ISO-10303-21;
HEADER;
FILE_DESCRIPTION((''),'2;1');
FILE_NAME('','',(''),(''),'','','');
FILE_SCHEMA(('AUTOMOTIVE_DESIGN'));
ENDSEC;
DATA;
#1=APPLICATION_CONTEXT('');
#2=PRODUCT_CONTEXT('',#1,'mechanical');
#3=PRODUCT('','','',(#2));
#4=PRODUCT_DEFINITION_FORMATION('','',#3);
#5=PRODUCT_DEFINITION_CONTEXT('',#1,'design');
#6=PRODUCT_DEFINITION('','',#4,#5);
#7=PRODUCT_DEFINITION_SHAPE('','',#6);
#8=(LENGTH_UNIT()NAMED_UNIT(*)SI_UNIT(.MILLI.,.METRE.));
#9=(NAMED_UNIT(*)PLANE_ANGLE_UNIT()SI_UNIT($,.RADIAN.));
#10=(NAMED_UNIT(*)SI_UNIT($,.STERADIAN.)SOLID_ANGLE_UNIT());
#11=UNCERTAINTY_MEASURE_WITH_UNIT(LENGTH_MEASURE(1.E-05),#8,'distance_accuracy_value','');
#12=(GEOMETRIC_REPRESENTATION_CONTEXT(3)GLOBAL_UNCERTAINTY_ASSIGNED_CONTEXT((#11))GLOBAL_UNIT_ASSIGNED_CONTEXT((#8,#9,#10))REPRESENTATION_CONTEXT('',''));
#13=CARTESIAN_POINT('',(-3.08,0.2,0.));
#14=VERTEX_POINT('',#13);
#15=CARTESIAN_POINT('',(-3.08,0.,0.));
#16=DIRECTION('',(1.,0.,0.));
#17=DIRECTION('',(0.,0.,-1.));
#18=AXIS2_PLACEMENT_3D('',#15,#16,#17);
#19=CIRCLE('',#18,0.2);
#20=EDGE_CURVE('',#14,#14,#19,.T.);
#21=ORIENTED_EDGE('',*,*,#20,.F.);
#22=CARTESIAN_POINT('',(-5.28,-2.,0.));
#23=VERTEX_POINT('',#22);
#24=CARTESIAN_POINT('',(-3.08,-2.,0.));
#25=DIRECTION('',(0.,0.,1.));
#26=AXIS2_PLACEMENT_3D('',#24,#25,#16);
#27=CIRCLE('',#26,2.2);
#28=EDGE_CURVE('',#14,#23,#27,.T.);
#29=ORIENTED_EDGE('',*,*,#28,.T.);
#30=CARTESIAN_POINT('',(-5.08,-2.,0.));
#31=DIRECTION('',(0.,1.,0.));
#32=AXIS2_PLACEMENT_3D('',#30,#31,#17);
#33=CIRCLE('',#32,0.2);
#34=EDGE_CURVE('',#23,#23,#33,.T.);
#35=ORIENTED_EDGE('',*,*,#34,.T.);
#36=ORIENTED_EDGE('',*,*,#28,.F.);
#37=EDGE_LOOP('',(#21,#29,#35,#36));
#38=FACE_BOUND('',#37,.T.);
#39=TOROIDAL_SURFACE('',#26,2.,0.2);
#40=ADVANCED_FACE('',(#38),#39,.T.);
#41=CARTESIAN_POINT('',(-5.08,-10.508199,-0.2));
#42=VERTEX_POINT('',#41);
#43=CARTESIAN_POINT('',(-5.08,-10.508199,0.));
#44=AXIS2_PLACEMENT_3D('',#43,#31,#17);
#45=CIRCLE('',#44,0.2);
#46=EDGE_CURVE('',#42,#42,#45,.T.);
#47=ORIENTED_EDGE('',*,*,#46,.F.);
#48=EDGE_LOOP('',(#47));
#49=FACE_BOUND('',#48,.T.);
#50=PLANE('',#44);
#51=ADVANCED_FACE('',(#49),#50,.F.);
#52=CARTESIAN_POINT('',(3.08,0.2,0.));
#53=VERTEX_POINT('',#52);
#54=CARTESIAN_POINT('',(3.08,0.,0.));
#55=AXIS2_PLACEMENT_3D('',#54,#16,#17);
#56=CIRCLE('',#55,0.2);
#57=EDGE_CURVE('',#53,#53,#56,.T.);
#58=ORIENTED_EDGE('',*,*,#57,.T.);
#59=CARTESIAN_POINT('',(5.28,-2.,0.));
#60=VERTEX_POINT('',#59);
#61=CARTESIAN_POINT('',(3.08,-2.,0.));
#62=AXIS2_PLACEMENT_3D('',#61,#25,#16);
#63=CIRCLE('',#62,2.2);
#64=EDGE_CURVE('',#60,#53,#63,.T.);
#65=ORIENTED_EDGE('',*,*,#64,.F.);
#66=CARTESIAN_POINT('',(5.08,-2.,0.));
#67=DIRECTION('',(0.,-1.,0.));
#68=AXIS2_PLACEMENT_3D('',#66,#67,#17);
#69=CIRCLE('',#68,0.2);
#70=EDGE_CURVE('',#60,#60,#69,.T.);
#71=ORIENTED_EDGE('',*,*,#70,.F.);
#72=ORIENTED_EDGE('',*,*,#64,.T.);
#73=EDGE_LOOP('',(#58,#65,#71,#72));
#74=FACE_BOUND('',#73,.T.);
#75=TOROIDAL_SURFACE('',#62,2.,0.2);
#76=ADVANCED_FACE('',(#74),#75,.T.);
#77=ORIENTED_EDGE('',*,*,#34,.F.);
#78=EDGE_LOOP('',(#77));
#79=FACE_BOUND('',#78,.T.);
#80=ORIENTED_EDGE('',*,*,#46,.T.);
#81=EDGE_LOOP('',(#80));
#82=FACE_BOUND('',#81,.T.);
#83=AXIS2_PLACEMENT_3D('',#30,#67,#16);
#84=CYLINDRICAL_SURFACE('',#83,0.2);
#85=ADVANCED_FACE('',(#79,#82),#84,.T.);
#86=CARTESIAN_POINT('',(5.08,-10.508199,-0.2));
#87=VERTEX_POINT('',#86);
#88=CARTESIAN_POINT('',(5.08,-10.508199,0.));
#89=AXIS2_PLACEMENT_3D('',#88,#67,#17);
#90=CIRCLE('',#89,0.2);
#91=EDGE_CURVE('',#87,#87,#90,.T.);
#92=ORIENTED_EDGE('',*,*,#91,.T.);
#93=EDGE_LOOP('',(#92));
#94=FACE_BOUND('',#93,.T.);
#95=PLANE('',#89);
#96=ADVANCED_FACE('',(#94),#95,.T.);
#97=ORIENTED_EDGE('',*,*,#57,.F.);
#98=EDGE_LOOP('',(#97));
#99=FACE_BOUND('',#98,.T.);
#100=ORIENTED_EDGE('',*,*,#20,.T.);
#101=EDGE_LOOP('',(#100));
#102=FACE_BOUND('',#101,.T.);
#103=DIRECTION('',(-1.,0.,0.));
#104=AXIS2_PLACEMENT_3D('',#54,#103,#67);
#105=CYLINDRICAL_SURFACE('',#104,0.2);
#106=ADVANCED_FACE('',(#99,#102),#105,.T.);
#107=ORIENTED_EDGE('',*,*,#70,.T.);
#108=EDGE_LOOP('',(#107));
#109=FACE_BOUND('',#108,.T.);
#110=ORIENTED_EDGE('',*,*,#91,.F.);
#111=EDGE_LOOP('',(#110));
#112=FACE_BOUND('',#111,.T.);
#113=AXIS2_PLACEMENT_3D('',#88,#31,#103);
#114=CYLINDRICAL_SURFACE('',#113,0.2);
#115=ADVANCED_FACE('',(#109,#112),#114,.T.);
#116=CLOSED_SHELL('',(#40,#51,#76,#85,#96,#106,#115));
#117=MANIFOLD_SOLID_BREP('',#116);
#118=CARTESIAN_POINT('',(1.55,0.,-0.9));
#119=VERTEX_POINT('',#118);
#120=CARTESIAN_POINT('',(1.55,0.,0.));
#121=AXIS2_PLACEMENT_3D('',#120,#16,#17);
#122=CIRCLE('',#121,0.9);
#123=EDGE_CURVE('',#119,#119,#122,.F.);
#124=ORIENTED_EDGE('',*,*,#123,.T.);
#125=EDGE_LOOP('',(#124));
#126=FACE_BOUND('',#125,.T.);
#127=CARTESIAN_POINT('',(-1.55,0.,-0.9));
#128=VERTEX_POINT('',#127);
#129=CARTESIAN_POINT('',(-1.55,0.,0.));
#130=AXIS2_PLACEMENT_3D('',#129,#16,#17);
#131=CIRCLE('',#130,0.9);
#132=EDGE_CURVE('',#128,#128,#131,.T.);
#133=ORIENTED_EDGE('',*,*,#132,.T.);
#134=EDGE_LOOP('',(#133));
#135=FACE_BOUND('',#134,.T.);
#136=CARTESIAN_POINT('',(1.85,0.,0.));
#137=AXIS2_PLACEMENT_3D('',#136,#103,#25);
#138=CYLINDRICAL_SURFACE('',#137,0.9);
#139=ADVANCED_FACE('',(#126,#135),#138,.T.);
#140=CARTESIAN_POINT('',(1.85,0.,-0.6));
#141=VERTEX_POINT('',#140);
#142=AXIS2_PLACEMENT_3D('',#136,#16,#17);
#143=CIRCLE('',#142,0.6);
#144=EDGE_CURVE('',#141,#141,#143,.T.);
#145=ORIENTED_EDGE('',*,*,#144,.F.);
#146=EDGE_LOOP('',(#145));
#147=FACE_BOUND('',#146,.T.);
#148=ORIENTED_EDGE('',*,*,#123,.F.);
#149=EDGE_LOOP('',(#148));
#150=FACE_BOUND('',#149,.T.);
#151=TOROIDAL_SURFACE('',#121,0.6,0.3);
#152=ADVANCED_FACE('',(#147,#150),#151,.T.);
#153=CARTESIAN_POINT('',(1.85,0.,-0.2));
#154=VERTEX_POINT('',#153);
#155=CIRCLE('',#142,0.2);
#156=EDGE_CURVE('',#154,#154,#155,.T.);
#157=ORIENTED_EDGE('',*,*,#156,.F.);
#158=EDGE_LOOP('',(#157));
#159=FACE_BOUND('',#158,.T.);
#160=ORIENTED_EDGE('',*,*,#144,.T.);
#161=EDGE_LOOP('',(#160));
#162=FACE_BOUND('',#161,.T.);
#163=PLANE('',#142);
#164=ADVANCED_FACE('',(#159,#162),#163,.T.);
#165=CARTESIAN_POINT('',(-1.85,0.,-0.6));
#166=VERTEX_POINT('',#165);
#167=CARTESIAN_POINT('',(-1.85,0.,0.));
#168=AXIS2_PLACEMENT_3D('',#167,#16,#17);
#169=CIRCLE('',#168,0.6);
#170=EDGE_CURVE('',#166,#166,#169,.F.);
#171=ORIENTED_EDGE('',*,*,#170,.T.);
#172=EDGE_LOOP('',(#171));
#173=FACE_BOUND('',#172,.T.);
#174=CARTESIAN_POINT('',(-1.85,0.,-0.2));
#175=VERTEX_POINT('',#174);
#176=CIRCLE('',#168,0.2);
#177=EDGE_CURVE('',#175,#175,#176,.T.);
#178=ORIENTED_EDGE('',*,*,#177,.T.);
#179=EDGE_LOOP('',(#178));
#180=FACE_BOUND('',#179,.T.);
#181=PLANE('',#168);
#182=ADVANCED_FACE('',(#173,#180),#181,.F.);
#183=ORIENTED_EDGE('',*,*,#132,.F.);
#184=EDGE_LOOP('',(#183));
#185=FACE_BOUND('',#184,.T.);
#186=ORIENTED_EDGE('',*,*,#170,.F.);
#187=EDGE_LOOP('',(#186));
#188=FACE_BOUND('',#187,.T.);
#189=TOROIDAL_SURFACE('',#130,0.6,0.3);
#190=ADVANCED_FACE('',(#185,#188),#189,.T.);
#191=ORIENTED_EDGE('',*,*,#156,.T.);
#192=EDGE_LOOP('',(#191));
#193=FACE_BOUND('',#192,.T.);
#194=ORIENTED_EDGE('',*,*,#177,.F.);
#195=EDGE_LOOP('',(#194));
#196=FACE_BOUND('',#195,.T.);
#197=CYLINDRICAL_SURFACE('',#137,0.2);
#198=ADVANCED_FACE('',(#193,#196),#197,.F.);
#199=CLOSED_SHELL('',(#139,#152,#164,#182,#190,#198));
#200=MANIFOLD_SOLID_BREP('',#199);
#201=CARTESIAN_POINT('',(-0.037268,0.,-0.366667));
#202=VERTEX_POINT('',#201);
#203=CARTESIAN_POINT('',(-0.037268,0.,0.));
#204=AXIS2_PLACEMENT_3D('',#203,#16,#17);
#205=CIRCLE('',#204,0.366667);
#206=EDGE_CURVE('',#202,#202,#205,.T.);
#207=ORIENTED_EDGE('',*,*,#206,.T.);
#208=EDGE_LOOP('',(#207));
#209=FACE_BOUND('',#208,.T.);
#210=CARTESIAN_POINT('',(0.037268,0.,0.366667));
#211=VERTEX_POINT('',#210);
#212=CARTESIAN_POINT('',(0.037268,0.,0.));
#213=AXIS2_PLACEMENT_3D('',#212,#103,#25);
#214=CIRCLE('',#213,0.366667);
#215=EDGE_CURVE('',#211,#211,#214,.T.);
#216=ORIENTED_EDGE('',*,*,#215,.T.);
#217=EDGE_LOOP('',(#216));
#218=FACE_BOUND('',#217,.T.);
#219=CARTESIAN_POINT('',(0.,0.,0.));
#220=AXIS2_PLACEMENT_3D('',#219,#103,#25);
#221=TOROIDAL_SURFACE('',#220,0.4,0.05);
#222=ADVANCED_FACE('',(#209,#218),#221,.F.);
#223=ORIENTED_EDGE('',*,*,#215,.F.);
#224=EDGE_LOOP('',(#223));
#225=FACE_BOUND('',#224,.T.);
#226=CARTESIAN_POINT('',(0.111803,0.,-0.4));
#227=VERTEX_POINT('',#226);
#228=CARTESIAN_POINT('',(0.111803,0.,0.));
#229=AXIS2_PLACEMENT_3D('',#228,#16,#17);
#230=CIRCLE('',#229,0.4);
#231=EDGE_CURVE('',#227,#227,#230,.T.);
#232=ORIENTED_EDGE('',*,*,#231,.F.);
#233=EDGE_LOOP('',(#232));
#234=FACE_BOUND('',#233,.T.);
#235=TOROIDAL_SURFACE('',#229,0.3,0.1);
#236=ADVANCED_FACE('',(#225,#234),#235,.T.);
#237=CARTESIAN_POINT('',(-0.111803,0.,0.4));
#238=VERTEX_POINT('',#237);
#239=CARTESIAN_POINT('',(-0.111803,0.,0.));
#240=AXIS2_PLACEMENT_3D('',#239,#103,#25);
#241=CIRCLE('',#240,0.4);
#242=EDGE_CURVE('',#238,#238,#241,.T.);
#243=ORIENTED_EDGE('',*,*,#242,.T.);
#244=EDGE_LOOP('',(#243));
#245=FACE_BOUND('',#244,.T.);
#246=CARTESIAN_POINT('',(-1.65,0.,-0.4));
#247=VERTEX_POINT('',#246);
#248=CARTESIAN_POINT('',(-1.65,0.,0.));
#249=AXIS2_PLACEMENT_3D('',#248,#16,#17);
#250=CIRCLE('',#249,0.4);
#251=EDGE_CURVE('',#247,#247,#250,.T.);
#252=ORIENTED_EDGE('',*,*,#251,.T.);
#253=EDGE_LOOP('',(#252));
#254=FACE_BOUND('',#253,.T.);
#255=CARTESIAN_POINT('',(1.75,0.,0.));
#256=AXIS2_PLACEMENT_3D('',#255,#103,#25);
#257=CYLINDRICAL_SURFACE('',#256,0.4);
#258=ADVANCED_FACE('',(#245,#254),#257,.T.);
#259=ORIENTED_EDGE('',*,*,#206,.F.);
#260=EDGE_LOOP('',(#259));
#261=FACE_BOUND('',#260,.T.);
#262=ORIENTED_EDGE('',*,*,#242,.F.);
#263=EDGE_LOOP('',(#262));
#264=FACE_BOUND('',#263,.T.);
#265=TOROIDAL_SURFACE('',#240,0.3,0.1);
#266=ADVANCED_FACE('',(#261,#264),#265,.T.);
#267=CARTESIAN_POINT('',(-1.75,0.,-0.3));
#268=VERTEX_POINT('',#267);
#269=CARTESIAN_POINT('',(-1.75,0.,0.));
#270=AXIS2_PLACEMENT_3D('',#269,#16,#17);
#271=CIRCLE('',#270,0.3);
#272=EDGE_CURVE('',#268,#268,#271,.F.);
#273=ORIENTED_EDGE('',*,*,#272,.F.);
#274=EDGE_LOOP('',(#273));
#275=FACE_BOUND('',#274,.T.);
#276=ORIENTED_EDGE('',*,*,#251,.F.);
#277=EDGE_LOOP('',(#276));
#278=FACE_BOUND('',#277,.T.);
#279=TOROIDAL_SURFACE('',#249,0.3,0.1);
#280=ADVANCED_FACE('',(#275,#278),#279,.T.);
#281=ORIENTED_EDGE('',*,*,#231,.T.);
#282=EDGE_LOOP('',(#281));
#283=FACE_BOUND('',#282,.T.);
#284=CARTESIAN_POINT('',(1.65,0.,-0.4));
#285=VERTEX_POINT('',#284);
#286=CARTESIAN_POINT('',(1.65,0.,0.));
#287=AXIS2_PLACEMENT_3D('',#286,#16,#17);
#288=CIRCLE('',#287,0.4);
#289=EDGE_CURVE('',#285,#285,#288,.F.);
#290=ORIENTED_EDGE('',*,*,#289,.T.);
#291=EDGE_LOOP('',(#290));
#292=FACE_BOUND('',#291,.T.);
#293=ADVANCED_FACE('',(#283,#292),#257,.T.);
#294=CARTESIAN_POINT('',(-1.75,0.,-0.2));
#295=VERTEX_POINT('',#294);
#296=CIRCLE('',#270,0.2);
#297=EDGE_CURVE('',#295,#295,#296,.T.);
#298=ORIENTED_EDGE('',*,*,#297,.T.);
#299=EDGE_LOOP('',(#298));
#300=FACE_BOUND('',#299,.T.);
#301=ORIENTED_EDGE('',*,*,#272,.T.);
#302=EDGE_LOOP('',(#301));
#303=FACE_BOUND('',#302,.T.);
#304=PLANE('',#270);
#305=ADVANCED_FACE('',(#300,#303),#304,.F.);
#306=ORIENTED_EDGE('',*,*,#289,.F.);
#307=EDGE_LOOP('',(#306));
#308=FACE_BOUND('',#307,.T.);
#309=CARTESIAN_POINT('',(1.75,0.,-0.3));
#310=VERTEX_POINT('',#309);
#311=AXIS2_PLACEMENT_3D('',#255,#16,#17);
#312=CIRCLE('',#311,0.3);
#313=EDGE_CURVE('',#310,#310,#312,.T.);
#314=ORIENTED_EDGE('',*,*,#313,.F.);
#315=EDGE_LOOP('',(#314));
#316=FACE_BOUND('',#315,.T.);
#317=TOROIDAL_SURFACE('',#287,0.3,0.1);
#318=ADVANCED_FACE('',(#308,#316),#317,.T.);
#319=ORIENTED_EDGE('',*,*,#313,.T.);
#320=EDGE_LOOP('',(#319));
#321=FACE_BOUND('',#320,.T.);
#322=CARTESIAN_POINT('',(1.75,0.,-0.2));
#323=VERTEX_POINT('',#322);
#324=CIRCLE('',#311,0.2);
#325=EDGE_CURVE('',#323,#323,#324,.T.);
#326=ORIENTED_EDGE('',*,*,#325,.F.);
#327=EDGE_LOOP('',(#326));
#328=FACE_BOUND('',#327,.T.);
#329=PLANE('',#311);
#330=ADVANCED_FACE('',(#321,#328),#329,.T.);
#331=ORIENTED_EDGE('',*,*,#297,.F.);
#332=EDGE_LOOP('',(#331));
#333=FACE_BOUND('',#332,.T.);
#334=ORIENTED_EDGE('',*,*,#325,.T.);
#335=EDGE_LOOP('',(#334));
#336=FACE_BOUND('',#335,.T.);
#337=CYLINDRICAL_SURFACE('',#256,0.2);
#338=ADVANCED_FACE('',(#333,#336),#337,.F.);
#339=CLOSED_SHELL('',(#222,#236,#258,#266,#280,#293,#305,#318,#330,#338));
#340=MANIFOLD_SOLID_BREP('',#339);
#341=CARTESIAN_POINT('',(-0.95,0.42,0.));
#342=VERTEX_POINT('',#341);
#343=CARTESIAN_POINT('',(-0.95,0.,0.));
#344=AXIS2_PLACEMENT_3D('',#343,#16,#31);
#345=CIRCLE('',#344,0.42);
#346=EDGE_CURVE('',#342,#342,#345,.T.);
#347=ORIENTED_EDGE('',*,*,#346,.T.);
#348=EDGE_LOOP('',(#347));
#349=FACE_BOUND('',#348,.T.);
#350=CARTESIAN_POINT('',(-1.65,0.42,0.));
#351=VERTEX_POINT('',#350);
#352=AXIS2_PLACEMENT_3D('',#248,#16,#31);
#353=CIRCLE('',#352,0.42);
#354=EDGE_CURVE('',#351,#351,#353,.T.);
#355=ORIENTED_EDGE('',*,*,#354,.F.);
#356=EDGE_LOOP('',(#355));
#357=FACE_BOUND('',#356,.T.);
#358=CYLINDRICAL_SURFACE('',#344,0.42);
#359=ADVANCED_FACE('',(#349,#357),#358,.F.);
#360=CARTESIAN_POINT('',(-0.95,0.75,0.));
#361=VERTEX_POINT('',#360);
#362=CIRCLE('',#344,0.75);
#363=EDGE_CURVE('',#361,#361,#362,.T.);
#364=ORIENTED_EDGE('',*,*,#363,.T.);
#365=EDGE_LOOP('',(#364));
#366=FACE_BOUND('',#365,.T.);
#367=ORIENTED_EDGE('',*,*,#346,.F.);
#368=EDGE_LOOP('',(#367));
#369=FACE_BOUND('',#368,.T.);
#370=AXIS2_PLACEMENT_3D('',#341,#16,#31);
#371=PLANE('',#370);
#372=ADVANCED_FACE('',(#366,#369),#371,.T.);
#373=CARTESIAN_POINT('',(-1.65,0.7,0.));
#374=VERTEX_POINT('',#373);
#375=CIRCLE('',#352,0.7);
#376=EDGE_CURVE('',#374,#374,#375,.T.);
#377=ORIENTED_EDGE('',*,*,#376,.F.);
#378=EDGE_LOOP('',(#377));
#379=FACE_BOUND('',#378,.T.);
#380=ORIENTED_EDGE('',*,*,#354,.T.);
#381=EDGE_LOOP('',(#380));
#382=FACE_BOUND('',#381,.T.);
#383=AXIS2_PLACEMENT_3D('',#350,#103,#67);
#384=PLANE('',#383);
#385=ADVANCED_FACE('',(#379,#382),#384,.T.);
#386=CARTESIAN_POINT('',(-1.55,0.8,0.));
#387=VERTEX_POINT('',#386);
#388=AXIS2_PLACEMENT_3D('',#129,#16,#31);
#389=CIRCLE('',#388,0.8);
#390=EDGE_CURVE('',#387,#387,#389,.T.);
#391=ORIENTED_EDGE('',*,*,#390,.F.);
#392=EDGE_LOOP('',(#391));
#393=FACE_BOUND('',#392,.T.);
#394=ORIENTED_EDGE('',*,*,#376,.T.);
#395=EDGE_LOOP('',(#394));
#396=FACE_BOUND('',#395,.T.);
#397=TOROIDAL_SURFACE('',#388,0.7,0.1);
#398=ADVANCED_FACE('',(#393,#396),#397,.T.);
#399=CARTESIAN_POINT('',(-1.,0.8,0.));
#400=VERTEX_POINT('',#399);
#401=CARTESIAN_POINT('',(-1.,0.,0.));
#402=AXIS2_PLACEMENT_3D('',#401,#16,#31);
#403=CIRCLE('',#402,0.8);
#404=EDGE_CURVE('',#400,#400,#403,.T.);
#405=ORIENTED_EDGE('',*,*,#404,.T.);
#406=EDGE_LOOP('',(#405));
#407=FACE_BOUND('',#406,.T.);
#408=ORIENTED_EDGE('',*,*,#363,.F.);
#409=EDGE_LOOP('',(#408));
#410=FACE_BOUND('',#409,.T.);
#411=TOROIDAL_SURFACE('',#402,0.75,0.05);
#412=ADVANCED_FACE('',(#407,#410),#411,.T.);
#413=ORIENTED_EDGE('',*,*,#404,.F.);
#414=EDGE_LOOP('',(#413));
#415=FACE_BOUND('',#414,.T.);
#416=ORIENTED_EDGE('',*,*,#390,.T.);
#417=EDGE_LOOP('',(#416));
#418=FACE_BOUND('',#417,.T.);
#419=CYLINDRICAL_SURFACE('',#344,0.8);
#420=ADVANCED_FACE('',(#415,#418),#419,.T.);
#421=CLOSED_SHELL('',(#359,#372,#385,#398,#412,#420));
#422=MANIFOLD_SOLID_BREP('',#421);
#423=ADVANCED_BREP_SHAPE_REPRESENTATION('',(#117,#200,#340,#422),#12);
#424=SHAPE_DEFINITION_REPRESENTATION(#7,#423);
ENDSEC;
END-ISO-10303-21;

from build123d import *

# Parameters (mm, degrees)
SKETCH1_R           = 0.4
SKETCH1_R_2         = 0.2
BOSS_EXTRUDE1_DEPTH = 1.75
FILLET2_R           = 0.1
SKETCH4_R           = 0.9
SKETCH4_R_2         = 0.2
BOSS_EXTRUDE2_DEPTH = 1.85
FILLET1_R           = 0.3
SKETCH7_R           = 0.2
SKETCH9_R           = 0.05


with BuildPart() as part:
    # Sketch1 → Boss-Extrude1 (new, symmetric)
    with BuildSketch(Plane(origin=(0, 0, 0), x_dir=(0, 0, -1), z_dir=(1, 0, 0))):
        Circle(SKETCH1_R)
        Circle(SKETCH1_R_2, mode=Mode.SUBTRACT)
    extrude(amount=BOSS_EXTRUDE1_DEPTH, both=True)

    # Fillet2
    fillet2_edges = [part.edges().sort_by_distance(p)[0] for p in [
        (-1.75, 0, 0.4),
        (1.75, 0, 0.4),
    ]]
    fillet(fillet2_edges, radius=FILLET2_R)

    # Sketch9 → Cut-Revolve1 (revolve, cut)
    with BuildSketch(Plane.XY):
        with Locations((0, 0.4)):
            Circle(SKETCH9_R)
    revolve(axis=Axis((-1.65, 0, 0), (1, 0, 0)), mode=Mode.SUBTRACT)

    # Fillet3: read off the stored shape, not the designer's step
    # Fillet3 outline → Fillet3 (revolve, cut)
    with BuildSketch(Plane.YX):
        with BuildLine():
            ThreePointArc((0.4, 0.111803399), (0.391287093, 0.07097857), (0.366666667, 0.0372678))
            Line((0.366666667, 0.0372678), (0.4, 0.0372678))
            Line((0.4, 0.0372678), (0.4, 0.111803399))
        make_face()
        with BuildLine():
            Line((0.4, -0.0372678), (0.366666667, -0.0372678))
            ThreePointArc((0.366666667, -0.0372678), (0.391287093, -0.07097857), (0.4, -0.111803399))
            Line((0.4, -0.111803399), (0.4, -0.0372678))
        make_face()
    revolve(axis=Axis((0, 0, 0), (1, 0, 0)), mode=Mode.SUBTRACT)


with BuildPart() as body_2:
    # Sketch4 → Boss-Extrude2 (new, symmetric)
    with BuildSketch(Plane(origin=(0, 0, 0), x_dir=(0, 0, -1), z_dir=(1, 0, 0))):
        Circle(SKETCH4_R)
        Circle(SKETCH4_R_2, mode=Mode.SUBTRACT)
    extrude(amount=BOSS_EXTRUDE2_DEPTH, both=True)

    # Fillet1
    fillet1_edges = [body_2.edges().sort_by_distance(p)[0] for p in [
        (-1.85, 0, 0.9),
        (1.85, 0, 0.9),
    ]]
    fillet(fillet1_edges, radius=FILLET1_R)


with BuildPart() as body_3:
    # Sweep1: sweep along a path in Sketch6
    with BuildLine(Plane.XY) as sweep1_path:
        Line((-5.08, -10.508198559), (-5.08, -2))
        ThreePointArc((-5.08, -2), (-4.494213562, -0.585786438), (-3.08, 0))
        Line((-3.08, 0), (0, 0))
        Line((0, 0), (3.08, 0))
        ThreePointArc((3.08, 0), (4.494213562, -0.585786438), (5.08, -2))
        Line((5.08, -2), (5.08, -10.508198559))
    # Sketch7 → Sweep1 (sweep)
    with BuildSketch(Plane(origin=(0, 0, 0), x_dir=(0, 0, -1), z_dir=(1, 0, 0))):
        Circle(SKETCH7_R)
    sweep(path=sweep1_path.line)


with BuildPart() as body_4:
    # Sketch8 → Revolve2 (revolve)
    with BuildSketch(Plane.XY):
        with BuildLine():
            Line((-0.95, 0.42), (-0.95, 0.75))
            ThreePointArc((-0.95, 0.75), (-0.964644661, 0.785355339), (-1, 0.8))
            Line((-1, 0.8), (-1.55, 0.8))
            ThreePointArc((-1.55, 0.8), (-1.620710678, 0.770710678), (-1.65, 0.7))
            Line((-1.65, 0.7), (-1.65, 0.42))
            Line((-1.65, 0.42), (-0.95, 0.42))
        make_face()
    revolve(axis=Axis((-0.95, 0, 0), (-1, 0, 0)))


solid = Compound([part.part, body_2.part, body_3.part, body_4.part])
